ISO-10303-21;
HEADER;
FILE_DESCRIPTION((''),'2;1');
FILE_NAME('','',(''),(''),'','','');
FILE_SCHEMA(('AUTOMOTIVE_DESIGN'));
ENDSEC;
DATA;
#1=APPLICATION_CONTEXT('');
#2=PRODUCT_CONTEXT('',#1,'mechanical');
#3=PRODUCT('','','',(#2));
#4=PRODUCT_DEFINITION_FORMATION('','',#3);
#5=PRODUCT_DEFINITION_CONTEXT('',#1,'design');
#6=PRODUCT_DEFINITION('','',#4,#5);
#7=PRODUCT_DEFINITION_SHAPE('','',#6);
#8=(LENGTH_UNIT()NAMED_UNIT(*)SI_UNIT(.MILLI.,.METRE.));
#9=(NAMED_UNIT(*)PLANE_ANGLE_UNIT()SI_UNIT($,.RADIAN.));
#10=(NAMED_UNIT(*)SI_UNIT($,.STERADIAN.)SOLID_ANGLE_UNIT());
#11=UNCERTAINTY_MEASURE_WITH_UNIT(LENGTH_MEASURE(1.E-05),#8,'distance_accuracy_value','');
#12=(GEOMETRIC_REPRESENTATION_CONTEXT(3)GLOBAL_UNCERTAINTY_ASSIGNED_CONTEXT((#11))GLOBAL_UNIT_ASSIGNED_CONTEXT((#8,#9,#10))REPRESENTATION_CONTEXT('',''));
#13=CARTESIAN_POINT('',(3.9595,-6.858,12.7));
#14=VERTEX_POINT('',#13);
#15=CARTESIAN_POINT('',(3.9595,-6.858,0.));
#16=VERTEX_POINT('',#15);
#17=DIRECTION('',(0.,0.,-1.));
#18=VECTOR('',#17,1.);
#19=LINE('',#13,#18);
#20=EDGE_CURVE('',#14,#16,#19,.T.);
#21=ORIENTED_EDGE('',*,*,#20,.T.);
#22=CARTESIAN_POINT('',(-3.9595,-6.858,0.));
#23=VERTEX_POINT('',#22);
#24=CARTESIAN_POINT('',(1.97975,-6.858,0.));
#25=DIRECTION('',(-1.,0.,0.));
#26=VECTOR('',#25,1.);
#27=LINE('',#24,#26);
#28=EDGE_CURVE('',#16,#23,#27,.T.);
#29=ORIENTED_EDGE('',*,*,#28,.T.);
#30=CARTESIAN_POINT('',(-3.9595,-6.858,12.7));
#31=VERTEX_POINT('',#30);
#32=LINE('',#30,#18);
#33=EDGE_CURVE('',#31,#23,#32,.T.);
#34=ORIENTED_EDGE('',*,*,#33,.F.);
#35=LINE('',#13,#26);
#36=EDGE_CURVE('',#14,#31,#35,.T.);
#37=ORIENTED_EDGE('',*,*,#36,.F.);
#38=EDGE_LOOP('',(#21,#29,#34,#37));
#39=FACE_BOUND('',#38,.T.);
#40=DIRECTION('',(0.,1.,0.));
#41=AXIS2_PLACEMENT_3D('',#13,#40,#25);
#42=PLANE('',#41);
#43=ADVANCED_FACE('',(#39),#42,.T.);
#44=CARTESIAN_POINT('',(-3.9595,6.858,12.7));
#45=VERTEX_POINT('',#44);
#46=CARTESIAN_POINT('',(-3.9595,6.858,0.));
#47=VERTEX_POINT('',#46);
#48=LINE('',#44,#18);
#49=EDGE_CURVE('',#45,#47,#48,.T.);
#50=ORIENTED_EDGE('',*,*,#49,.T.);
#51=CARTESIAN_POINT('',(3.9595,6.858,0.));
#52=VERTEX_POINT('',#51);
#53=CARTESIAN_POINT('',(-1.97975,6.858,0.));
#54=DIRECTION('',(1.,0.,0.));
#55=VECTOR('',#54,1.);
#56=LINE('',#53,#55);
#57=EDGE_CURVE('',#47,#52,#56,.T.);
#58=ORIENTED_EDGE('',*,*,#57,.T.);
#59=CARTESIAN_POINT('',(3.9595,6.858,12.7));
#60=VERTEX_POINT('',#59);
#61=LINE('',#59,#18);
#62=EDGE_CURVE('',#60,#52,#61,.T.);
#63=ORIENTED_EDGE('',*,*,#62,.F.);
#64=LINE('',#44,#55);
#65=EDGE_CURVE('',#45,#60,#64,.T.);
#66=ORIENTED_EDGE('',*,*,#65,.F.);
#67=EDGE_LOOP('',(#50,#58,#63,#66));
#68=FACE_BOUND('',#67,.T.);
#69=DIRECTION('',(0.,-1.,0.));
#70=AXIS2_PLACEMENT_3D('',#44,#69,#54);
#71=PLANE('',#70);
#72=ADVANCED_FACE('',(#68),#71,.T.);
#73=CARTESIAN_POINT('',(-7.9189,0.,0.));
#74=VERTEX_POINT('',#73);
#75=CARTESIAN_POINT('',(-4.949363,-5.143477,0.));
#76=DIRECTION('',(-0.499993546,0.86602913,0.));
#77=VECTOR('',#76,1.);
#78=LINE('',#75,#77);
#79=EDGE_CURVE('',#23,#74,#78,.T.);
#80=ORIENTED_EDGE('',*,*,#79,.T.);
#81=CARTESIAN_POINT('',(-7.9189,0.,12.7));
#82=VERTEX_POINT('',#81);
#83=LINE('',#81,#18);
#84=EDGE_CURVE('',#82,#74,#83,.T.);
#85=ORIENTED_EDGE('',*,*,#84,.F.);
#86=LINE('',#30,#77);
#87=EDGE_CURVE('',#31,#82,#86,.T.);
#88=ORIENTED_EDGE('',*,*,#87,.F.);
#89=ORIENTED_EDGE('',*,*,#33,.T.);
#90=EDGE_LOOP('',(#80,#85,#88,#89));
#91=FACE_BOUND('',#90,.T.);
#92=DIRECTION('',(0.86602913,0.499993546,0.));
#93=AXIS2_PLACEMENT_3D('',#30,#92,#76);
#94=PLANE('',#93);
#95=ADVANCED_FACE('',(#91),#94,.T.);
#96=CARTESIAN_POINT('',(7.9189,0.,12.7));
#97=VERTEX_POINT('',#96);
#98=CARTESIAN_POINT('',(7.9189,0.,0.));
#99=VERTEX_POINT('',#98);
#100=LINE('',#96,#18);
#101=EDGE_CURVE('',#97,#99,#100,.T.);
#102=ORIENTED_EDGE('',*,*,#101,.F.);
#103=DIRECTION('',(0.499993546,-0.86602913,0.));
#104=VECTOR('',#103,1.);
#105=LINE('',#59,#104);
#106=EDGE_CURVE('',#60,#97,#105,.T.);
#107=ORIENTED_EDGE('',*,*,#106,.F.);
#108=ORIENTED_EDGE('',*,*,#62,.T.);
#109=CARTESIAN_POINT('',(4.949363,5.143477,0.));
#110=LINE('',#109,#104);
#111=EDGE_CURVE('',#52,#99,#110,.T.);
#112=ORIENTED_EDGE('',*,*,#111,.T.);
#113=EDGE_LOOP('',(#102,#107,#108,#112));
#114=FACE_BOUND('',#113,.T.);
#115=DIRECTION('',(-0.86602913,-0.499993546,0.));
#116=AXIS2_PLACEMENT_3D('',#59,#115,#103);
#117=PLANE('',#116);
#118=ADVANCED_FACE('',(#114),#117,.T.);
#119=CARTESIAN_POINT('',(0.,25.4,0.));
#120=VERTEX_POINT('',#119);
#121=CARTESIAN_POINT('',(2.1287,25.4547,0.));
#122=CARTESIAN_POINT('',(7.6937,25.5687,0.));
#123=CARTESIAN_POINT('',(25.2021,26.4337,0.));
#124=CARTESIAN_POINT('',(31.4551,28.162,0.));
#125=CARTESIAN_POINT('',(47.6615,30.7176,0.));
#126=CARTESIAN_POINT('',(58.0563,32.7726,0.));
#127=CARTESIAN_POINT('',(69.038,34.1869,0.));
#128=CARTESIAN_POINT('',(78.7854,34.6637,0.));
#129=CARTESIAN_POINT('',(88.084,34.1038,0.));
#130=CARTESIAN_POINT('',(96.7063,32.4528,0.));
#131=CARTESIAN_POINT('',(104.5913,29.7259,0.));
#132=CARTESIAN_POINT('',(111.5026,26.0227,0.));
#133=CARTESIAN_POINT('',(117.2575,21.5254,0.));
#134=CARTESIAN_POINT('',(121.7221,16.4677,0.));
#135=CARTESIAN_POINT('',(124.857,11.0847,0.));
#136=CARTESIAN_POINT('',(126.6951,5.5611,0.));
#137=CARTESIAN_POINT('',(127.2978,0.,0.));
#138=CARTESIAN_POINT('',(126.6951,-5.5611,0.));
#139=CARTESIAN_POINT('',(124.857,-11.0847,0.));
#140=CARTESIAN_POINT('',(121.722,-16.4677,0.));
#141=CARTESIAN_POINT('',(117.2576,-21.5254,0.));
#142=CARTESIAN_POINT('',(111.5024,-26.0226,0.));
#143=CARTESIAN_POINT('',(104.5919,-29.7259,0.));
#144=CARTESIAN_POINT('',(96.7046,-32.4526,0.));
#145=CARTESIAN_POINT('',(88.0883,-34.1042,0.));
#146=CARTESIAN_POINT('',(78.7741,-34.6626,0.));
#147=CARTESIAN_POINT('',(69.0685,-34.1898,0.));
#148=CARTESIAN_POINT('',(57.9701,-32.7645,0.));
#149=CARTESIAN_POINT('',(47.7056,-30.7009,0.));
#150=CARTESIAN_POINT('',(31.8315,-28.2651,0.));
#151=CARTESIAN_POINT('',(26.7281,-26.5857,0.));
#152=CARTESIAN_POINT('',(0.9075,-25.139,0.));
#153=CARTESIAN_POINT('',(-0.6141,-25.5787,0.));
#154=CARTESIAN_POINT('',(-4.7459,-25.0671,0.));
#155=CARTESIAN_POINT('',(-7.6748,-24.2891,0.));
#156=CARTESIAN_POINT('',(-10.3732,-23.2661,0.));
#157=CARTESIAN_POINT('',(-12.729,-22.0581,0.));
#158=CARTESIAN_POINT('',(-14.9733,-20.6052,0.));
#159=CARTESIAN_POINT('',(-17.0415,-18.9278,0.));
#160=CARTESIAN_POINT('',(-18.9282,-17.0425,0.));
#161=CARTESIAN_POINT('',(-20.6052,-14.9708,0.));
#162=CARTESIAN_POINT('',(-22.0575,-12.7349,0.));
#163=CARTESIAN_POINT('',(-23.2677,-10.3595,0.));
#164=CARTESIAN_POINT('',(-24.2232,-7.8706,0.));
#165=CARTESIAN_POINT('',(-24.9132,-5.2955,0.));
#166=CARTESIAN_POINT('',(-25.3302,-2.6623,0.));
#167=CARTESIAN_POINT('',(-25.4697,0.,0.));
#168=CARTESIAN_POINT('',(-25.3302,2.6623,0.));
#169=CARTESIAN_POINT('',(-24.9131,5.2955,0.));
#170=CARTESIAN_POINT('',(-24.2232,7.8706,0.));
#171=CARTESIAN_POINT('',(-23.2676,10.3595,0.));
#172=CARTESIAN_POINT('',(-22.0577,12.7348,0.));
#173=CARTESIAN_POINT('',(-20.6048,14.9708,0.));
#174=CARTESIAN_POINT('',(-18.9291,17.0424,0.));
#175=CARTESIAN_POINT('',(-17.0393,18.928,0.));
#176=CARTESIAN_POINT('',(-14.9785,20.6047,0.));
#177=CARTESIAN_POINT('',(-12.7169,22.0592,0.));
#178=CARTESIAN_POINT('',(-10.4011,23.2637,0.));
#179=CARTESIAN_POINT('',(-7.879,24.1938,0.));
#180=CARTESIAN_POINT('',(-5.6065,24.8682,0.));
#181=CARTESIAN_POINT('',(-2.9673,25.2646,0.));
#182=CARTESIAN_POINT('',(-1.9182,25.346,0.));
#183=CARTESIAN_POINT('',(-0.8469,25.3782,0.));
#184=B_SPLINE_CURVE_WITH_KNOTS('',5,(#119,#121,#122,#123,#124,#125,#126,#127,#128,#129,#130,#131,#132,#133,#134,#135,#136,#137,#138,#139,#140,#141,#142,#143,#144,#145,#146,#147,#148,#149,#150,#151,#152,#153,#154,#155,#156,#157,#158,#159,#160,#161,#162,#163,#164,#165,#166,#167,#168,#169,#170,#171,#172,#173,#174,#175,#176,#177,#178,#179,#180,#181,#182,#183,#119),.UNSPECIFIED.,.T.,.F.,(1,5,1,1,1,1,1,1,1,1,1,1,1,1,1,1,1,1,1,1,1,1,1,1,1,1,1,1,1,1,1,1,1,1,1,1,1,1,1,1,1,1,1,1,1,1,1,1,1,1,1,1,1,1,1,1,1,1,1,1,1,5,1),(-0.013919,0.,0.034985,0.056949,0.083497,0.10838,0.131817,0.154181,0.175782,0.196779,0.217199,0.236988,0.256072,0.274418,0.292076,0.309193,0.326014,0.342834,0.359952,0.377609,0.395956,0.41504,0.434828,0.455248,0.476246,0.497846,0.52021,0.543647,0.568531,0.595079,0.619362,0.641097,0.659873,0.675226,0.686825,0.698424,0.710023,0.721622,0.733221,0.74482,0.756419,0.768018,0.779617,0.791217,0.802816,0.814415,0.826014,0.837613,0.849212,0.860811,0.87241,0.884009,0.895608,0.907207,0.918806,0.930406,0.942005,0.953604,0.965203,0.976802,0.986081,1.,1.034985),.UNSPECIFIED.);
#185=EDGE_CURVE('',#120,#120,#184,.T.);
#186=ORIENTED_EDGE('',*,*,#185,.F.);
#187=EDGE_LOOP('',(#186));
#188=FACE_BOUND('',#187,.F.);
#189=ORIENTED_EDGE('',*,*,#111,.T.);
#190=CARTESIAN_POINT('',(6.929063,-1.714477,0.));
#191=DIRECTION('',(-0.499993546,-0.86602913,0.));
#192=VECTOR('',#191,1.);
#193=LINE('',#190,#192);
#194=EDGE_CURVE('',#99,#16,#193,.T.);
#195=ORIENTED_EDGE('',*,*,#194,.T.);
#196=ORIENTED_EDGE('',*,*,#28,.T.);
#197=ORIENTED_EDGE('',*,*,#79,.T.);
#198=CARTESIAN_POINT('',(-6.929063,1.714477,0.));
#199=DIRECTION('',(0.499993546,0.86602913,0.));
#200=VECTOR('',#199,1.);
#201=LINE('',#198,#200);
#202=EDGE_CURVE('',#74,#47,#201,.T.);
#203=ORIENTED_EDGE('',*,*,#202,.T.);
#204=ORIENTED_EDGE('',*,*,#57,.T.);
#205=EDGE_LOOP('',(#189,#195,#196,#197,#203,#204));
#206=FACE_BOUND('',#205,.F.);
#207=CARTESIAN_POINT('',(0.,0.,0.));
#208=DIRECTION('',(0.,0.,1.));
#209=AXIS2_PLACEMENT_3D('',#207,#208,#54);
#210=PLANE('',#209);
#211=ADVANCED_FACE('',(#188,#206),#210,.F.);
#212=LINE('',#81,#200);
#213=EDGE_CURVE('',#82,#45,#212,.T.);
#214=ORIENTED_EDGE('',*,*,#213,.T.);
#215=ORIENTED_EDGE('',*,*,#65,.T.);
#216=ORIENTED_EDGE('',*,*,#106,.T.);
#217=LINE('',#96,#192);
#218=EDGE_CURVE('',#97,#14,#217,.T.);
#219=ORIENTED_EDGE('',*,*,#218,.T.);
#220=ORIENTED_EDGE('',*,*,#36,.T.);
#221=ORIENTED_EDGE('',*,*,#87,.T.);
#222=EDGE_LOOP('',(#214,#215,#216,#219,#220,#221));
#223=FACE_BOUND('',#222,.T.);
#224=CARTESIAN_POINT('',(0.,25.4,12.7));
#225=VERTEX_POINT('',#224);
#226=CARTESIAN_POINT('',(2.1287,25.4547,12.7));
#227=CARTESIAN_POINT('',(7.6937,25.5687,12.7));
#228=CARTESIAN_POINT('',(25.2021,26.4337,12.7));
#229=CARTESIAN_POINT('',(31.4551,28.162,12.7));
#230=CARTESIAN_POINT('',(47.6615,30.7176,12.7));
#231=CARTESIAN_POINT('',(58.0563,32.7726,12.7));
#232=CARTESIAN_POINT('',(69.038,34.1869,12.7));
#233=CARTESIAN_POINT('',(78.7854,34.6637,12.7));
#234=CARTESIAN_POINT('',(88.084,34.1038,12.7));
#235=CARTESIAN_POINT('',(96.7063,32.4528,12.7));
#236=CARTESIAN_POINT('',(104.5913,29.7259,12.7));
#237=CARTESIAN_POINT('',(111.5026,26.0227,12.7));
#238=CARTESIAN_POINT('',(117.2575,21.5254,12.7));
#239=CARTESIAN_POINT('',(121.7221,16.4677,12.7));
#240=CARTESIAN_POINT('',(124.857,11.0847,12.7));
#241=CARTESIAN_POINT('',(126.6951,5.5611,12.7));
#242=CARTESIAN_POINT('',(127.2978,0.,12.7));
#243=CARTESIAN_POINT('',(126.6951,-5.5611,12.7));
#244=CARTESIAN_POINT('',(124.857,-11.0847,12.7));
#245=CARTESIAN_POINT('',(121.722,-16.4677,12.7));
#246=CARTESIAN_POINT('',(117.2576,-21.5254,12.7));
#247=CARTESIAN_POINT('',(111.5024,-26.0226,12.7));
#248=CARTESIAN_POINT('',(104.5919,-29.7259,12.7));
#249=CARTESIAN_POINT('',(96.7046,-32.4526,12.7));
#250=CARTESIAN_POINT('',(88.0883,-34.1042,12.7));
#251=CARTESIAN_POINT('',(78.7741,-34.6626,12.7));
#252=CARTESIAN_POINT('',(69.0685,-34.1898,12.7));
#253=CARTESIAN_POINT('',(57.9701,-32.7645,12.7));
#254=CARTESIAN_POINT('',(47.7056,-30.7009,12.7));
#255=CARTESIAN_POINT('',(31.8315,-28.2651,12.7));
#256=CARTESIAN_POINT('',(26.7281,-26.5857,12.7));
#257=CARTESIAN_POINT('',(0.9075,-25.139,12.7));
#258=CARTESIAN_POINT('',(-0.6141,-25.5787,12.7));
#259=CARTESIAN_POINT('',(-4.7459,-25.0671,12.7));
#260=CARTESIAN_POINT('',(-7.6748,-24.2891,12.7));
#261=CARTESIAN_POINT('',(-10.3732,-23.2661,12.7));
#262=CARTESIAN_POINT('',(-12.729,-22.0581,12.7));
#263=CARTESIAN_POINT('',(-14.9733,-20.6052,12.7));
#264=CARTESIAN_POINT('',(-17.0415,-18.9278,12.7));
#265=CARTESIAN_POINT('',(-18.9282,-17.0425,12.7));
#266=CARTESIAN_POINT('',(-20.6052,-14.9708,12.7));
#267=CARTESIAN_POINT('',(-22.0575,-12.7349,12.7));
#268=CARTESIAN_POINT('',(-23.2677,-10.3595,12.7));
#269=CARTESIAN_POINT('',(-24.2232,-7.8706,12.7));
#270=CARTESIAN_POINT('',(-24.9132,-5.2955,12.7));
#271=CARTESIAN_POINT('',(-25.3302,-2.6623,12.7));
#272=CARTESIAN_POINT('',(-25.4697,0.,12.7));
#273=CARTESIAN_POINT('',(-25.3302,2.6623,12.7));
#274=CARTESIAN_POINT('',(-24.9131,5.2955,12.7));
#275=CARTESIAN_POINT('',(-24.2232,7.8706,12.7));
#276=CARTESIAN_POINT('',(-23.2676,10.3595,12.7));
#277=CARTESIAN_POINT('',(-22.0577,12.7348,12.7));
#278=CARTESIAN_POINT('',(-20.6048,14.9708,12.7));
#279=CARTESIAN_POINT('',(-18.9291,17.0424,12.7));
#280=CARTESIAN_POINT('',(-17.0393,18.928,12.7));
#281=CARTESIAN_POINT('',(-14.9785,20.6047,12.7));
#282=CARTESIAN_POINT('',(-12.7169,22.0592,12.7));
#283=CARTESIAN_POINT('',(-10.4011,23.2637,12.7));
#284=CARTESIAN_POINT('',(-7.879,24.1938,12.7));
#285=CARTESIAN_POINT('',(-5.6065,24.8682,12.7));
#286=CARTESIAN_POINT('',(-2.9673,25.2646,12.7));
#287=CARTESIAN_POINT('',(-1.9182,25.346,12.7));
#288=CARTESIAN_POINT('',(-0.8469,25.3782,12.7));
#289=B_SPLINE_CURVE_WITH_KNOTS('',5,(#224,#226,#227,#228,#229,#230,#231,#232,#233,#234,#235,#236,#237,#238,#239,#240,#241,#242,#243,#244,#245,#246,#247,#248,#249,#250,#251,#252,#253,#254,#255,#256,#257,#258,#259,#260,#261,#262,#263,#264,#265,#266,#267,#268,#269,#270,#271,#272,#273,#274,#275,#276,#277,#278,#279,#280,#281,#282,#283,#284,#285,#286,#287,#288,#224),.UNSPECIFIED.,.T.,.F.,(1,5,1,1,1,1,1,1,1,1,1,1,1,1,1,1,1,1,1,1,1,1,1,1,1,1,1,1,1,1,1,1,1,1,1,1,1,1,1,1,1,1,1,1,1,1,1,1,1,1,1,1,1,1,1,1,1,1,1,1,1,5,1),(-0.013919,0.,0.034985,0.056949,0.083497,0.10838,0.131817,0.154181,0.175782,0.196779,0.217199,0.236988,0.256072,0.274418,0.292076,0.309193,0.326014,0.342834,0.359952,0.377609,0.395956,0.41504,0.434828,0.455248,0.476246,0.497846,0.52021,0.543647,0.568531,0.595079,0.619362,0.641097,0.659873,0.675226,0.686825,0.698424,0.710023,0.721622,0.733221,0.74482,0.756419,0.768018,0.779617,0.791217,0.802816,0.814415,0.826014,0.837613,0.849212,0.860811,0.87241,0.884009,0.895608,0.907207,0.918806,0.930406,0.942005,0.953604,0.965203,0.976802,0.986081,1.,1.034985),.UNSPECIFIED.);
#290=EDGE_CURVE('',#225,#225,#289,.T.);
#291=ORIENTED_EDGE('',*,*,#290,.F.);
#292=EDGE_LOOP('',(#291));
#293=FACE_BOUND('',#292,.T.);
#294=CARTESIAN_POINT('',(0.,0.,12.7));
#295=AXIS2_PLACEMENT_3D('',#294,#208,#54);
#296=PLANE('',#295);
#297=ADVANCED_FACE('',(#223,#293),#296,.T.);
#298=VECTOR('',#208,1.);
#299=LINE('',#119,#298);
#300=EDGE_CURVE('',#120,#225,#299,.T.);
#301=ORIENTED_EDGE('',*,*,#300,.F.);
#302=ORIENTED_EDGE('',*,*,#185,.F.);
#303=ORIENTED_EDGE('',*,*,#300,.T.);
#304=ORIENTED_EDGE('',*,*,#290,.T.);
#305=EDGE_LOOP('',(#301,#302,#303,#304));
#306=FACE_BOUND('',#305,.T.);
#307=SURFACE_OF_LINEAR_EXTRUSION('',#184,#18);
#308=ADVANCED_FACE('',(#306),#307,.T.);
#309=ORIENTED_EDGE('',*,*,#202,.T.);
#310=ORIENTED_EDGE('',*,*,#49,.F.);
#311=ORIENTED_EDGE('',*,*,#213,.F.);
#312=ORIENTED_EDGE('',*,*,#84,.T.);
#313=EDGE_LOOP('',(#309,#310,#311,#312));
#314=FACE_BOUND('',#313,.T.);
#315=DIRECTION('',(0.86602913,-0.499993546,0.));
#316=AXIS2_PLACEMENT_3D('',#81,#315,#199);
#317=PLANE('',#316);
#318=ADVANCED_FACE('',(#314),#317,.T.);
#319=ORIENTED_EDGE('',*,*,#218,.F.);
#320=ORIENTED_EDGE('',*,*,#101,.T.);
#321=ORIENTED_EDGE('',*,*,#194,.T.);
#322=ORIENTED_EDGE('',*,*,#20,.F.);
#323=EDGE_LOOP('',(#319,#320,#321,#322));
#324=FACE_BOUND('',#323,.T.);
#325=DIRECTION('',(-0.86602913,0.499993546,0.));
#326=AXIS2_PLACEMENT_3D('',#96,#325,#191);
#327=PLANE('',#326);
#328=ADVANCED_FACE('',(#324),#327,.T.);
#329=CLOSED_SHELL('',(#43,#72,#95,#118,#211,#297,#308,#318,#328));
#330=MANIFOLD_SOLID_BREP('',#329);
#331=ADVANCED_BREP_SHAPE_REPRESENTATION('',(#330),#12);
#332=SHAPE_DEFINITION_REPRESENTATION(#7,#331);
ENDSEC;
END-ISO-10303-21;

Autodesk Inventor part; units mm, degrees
ref_plane "YZ Plane" through (0, 0, 0) normal (1, 0, 0) x (0, 1, 0)
ref_plane "XZ Plane" through (0, 0, 0) normal (0, 1, 0) x (-1, 0, 0)
ref_plane "XY Plane" through (0, 0, 0) normal (0, 0, 1) x (1, 0, 0)
sketch "Main Sketch" plane through (0, 0, 0) normal (0, 0, 1) x (1, 0, 0)
  spline S0 degree 5 poles (0, 25.4) (2.1287, 25.4547) (7.6937, 25.5687) (25.2021, 26.4337) (31.4551, 28.162) (47.6615, 30.7176) (58.0563, 32.7726) (69.038, 34.1869) (78.7854, 34.6637) (88.084, 34.1038) (96.7063, 32.4528) (104.5913, 29.7259) (111.5026, 26.0227) (117.2575, 21.5254) (121.7221, 16.4677) (124.857, 11.0847) (126.6951, 5.5611) (127.2978, 0) (126.6951, -5.5611) (124.857, -11.0847) (121.722, -16.4677) (117.2576, -21.5254) (111.5024, -26.0226) (104.5919, -29.7259) (96.7046, -32.4526) (88.0883, -34.1042) (78.7741, -34.6626) (69.0685, -34.1898) (57.9701, -32.7645) (47.7056, -30.7009) (31.8315, -28.2651) (26.7281, -26.5857) (0.9075, -25.139) (-0.6141, -25.5787) (-4.7459, -25.0671) (-7.6748, -24.2891) (-10.3732, -23.2661) (-12.729, -22.0581) (-14.9733, -20.6052) (-17.0415, -18.9278) (-18.9282, -17.0425) (-20.6052, -14.9708) (-22.0575, -12.7349) (-23.2677, -10.3595) (-24.2232, -7.8706) (-24.9132, -5.2955) (-25.3302, -2.6623) (-25.4697, 0) (-25.3302, 2.6623) (-24.9131, 5.2955) (-24.2232, 7.8706) (-23.2676, 10.3595) (-22.0577, 12.7348) (-20.6048, 14.9708) (-18.9291, 17.0424) (-17.0393, 18.928) (-14.9785, 20.6047) (-12.7169, 22.0592) (-10.4011, 23.2637) (-7.879, 24.1938) (-5.6065, 24.8682) (-2.9673, 25.2646) (-1.9182, 25.346) (-0.8469, 25.3782) (0, 25.4) knots 0 0 0 0 0 0 0.034985 0.056949 0.083497 0.10838 0.131817 0.154181 0.175782 0.196779 0.217199 0.236988 0.256072 0.274418 0.292076 0.309193 0.326014 0.342834 0.359952 0.377609 0.395956 0.41504 0.434828 0.455248 0.476246 0.497846 0.52021 0.543647 0.568531 0.595079 0.619362 0.641097 0.659873 0.675226 0.686825 0.698424 0.710023 0.721622 0.733221 0.74482 0.756419 0.768018 0.779617 0.791217 0.802816 0.814415 0.826014 0.837613 0.849212 0.860811 0.87241 0.884009 0.895608 0.907207 0.918806 0.930406 0.942005 0.953604 0.965203 0.976802 0.986081 1 1 1 1 1 1
  point P0 (34.3511, 28.4773)
  point P1 (47.9087, 30.8624)
  point P2 (59.4553, 32.8129)
  point P3 (69.7636, 34.0431)
  point P4 (79.3599, 34.4006)
  point P5 (88.4593, 33.7633)
  point P6 (97.0267, 32.0479)
  point P7 (104.869, 29.2522)
  point P8 (111.7328, 25.4833)
  point P9 (117.3941, 20.9508)
  point P10 (121.7242, 15.9225)
  point P11 (124.7128, 10.6545)
  point P12 (126.4389, 5.3238)
  point P13 (127, 0)
  point P14 (126.4389, -5.3238)
  point P15 (124.7128, -10.6545)
  point P16 (121.7242, -15.9225)
  point P17 (117.3941, -20.9508)
  point P18 (111.7328, -25.4833)
  point P19 (104.869, -29.2522)
  point P20 (97.0267, -32.0479)
  point P21 (88.4593, -33.7633)
  point P22 (79.3599, -34.4006)
  point P23 (69.7636, -34.0431)
  point P24 (59.4553, -32.8129)
  point P25 (47.9087, -30.8624)
  point P26 (34.3511, -28.4773)
  point P27 (18.2006, -26.3139)
  point P28 (0, -25.4)
  point P29 (-2.655, -25.2609)
  point P30 (-5.281, -24.8449)
  point P31 (-7.849, -24.1568)
  point P32 (-10.3311, -23.2041)
  point P33 (-12.7, -21.997)
  point P34 (-14.9297, -20.549)
  point P35 (-16.9959, -18.8759)
  point P36 (-18.8759, -16.9959)
  point P37 (-20.549, -14.9297)
  point P38 (-21.997, -12.7)
  point P39 (-23.2041, -10.3311)
  point P40 (-24.1568, -7.849)
  point P41 (-24.8449, -5.281)
  point P42 (-25.2609, -2.655)
  point P43 (-25.4, 0)
  point P44 (-25.2609, 2.655)
  point P45 (-24.8449, 5.281)
  point P46 (-24.1568, 7.849)
  point P47 (-23.2041, 10.3311)
  point P48 (-21.997, 12.7)
  point P49 (-20.549, 14.9297)
  point P50 (-18.8759, 16.9959)
  point P51 (-16.9959, 18.8759)
  point P52 (-14.9297, 20.549)
  point P53 (-12.7, 21.997)
  point P54 (-10.3311, 23.2041)
  point P55 (-7.849, 24.1568)
  point P56 (-5.281, 24.8449)
  point P57 (-2.655, 25.2609)
extrude "Cam" add sketch "Main Sketch" along normal blind 12.7
sketch "Sketch2" plane through (0, 0, 12.7) normal (0, 0, 1) x (1, 0, 0)
  line L0 (7.9189, 0) -> (3.9595, -6.858)
  line L1 (3.9595, -6.858) -> (-3.9595, -6.858)
  line L2 (-3.9595, -6.858) -> (-7.9189, 0)
  line L3 (-7.9189, 0) -> (-3.9595, 6.858)
  line L4 (-3.9595, 6.858) -> (3.9595, 6.858)
  line L5 (3.9595, 6.858) -> (7.9189, 0)
  point P0 (0, 0)
  point P1 (0, 0)
  dimension "d4" = 13.716
extrude "Extrusion2" cut sketch "Sketch2" against normal through all
properties part number "Disc Cam" material "Stainless Steel, Austenitic"
